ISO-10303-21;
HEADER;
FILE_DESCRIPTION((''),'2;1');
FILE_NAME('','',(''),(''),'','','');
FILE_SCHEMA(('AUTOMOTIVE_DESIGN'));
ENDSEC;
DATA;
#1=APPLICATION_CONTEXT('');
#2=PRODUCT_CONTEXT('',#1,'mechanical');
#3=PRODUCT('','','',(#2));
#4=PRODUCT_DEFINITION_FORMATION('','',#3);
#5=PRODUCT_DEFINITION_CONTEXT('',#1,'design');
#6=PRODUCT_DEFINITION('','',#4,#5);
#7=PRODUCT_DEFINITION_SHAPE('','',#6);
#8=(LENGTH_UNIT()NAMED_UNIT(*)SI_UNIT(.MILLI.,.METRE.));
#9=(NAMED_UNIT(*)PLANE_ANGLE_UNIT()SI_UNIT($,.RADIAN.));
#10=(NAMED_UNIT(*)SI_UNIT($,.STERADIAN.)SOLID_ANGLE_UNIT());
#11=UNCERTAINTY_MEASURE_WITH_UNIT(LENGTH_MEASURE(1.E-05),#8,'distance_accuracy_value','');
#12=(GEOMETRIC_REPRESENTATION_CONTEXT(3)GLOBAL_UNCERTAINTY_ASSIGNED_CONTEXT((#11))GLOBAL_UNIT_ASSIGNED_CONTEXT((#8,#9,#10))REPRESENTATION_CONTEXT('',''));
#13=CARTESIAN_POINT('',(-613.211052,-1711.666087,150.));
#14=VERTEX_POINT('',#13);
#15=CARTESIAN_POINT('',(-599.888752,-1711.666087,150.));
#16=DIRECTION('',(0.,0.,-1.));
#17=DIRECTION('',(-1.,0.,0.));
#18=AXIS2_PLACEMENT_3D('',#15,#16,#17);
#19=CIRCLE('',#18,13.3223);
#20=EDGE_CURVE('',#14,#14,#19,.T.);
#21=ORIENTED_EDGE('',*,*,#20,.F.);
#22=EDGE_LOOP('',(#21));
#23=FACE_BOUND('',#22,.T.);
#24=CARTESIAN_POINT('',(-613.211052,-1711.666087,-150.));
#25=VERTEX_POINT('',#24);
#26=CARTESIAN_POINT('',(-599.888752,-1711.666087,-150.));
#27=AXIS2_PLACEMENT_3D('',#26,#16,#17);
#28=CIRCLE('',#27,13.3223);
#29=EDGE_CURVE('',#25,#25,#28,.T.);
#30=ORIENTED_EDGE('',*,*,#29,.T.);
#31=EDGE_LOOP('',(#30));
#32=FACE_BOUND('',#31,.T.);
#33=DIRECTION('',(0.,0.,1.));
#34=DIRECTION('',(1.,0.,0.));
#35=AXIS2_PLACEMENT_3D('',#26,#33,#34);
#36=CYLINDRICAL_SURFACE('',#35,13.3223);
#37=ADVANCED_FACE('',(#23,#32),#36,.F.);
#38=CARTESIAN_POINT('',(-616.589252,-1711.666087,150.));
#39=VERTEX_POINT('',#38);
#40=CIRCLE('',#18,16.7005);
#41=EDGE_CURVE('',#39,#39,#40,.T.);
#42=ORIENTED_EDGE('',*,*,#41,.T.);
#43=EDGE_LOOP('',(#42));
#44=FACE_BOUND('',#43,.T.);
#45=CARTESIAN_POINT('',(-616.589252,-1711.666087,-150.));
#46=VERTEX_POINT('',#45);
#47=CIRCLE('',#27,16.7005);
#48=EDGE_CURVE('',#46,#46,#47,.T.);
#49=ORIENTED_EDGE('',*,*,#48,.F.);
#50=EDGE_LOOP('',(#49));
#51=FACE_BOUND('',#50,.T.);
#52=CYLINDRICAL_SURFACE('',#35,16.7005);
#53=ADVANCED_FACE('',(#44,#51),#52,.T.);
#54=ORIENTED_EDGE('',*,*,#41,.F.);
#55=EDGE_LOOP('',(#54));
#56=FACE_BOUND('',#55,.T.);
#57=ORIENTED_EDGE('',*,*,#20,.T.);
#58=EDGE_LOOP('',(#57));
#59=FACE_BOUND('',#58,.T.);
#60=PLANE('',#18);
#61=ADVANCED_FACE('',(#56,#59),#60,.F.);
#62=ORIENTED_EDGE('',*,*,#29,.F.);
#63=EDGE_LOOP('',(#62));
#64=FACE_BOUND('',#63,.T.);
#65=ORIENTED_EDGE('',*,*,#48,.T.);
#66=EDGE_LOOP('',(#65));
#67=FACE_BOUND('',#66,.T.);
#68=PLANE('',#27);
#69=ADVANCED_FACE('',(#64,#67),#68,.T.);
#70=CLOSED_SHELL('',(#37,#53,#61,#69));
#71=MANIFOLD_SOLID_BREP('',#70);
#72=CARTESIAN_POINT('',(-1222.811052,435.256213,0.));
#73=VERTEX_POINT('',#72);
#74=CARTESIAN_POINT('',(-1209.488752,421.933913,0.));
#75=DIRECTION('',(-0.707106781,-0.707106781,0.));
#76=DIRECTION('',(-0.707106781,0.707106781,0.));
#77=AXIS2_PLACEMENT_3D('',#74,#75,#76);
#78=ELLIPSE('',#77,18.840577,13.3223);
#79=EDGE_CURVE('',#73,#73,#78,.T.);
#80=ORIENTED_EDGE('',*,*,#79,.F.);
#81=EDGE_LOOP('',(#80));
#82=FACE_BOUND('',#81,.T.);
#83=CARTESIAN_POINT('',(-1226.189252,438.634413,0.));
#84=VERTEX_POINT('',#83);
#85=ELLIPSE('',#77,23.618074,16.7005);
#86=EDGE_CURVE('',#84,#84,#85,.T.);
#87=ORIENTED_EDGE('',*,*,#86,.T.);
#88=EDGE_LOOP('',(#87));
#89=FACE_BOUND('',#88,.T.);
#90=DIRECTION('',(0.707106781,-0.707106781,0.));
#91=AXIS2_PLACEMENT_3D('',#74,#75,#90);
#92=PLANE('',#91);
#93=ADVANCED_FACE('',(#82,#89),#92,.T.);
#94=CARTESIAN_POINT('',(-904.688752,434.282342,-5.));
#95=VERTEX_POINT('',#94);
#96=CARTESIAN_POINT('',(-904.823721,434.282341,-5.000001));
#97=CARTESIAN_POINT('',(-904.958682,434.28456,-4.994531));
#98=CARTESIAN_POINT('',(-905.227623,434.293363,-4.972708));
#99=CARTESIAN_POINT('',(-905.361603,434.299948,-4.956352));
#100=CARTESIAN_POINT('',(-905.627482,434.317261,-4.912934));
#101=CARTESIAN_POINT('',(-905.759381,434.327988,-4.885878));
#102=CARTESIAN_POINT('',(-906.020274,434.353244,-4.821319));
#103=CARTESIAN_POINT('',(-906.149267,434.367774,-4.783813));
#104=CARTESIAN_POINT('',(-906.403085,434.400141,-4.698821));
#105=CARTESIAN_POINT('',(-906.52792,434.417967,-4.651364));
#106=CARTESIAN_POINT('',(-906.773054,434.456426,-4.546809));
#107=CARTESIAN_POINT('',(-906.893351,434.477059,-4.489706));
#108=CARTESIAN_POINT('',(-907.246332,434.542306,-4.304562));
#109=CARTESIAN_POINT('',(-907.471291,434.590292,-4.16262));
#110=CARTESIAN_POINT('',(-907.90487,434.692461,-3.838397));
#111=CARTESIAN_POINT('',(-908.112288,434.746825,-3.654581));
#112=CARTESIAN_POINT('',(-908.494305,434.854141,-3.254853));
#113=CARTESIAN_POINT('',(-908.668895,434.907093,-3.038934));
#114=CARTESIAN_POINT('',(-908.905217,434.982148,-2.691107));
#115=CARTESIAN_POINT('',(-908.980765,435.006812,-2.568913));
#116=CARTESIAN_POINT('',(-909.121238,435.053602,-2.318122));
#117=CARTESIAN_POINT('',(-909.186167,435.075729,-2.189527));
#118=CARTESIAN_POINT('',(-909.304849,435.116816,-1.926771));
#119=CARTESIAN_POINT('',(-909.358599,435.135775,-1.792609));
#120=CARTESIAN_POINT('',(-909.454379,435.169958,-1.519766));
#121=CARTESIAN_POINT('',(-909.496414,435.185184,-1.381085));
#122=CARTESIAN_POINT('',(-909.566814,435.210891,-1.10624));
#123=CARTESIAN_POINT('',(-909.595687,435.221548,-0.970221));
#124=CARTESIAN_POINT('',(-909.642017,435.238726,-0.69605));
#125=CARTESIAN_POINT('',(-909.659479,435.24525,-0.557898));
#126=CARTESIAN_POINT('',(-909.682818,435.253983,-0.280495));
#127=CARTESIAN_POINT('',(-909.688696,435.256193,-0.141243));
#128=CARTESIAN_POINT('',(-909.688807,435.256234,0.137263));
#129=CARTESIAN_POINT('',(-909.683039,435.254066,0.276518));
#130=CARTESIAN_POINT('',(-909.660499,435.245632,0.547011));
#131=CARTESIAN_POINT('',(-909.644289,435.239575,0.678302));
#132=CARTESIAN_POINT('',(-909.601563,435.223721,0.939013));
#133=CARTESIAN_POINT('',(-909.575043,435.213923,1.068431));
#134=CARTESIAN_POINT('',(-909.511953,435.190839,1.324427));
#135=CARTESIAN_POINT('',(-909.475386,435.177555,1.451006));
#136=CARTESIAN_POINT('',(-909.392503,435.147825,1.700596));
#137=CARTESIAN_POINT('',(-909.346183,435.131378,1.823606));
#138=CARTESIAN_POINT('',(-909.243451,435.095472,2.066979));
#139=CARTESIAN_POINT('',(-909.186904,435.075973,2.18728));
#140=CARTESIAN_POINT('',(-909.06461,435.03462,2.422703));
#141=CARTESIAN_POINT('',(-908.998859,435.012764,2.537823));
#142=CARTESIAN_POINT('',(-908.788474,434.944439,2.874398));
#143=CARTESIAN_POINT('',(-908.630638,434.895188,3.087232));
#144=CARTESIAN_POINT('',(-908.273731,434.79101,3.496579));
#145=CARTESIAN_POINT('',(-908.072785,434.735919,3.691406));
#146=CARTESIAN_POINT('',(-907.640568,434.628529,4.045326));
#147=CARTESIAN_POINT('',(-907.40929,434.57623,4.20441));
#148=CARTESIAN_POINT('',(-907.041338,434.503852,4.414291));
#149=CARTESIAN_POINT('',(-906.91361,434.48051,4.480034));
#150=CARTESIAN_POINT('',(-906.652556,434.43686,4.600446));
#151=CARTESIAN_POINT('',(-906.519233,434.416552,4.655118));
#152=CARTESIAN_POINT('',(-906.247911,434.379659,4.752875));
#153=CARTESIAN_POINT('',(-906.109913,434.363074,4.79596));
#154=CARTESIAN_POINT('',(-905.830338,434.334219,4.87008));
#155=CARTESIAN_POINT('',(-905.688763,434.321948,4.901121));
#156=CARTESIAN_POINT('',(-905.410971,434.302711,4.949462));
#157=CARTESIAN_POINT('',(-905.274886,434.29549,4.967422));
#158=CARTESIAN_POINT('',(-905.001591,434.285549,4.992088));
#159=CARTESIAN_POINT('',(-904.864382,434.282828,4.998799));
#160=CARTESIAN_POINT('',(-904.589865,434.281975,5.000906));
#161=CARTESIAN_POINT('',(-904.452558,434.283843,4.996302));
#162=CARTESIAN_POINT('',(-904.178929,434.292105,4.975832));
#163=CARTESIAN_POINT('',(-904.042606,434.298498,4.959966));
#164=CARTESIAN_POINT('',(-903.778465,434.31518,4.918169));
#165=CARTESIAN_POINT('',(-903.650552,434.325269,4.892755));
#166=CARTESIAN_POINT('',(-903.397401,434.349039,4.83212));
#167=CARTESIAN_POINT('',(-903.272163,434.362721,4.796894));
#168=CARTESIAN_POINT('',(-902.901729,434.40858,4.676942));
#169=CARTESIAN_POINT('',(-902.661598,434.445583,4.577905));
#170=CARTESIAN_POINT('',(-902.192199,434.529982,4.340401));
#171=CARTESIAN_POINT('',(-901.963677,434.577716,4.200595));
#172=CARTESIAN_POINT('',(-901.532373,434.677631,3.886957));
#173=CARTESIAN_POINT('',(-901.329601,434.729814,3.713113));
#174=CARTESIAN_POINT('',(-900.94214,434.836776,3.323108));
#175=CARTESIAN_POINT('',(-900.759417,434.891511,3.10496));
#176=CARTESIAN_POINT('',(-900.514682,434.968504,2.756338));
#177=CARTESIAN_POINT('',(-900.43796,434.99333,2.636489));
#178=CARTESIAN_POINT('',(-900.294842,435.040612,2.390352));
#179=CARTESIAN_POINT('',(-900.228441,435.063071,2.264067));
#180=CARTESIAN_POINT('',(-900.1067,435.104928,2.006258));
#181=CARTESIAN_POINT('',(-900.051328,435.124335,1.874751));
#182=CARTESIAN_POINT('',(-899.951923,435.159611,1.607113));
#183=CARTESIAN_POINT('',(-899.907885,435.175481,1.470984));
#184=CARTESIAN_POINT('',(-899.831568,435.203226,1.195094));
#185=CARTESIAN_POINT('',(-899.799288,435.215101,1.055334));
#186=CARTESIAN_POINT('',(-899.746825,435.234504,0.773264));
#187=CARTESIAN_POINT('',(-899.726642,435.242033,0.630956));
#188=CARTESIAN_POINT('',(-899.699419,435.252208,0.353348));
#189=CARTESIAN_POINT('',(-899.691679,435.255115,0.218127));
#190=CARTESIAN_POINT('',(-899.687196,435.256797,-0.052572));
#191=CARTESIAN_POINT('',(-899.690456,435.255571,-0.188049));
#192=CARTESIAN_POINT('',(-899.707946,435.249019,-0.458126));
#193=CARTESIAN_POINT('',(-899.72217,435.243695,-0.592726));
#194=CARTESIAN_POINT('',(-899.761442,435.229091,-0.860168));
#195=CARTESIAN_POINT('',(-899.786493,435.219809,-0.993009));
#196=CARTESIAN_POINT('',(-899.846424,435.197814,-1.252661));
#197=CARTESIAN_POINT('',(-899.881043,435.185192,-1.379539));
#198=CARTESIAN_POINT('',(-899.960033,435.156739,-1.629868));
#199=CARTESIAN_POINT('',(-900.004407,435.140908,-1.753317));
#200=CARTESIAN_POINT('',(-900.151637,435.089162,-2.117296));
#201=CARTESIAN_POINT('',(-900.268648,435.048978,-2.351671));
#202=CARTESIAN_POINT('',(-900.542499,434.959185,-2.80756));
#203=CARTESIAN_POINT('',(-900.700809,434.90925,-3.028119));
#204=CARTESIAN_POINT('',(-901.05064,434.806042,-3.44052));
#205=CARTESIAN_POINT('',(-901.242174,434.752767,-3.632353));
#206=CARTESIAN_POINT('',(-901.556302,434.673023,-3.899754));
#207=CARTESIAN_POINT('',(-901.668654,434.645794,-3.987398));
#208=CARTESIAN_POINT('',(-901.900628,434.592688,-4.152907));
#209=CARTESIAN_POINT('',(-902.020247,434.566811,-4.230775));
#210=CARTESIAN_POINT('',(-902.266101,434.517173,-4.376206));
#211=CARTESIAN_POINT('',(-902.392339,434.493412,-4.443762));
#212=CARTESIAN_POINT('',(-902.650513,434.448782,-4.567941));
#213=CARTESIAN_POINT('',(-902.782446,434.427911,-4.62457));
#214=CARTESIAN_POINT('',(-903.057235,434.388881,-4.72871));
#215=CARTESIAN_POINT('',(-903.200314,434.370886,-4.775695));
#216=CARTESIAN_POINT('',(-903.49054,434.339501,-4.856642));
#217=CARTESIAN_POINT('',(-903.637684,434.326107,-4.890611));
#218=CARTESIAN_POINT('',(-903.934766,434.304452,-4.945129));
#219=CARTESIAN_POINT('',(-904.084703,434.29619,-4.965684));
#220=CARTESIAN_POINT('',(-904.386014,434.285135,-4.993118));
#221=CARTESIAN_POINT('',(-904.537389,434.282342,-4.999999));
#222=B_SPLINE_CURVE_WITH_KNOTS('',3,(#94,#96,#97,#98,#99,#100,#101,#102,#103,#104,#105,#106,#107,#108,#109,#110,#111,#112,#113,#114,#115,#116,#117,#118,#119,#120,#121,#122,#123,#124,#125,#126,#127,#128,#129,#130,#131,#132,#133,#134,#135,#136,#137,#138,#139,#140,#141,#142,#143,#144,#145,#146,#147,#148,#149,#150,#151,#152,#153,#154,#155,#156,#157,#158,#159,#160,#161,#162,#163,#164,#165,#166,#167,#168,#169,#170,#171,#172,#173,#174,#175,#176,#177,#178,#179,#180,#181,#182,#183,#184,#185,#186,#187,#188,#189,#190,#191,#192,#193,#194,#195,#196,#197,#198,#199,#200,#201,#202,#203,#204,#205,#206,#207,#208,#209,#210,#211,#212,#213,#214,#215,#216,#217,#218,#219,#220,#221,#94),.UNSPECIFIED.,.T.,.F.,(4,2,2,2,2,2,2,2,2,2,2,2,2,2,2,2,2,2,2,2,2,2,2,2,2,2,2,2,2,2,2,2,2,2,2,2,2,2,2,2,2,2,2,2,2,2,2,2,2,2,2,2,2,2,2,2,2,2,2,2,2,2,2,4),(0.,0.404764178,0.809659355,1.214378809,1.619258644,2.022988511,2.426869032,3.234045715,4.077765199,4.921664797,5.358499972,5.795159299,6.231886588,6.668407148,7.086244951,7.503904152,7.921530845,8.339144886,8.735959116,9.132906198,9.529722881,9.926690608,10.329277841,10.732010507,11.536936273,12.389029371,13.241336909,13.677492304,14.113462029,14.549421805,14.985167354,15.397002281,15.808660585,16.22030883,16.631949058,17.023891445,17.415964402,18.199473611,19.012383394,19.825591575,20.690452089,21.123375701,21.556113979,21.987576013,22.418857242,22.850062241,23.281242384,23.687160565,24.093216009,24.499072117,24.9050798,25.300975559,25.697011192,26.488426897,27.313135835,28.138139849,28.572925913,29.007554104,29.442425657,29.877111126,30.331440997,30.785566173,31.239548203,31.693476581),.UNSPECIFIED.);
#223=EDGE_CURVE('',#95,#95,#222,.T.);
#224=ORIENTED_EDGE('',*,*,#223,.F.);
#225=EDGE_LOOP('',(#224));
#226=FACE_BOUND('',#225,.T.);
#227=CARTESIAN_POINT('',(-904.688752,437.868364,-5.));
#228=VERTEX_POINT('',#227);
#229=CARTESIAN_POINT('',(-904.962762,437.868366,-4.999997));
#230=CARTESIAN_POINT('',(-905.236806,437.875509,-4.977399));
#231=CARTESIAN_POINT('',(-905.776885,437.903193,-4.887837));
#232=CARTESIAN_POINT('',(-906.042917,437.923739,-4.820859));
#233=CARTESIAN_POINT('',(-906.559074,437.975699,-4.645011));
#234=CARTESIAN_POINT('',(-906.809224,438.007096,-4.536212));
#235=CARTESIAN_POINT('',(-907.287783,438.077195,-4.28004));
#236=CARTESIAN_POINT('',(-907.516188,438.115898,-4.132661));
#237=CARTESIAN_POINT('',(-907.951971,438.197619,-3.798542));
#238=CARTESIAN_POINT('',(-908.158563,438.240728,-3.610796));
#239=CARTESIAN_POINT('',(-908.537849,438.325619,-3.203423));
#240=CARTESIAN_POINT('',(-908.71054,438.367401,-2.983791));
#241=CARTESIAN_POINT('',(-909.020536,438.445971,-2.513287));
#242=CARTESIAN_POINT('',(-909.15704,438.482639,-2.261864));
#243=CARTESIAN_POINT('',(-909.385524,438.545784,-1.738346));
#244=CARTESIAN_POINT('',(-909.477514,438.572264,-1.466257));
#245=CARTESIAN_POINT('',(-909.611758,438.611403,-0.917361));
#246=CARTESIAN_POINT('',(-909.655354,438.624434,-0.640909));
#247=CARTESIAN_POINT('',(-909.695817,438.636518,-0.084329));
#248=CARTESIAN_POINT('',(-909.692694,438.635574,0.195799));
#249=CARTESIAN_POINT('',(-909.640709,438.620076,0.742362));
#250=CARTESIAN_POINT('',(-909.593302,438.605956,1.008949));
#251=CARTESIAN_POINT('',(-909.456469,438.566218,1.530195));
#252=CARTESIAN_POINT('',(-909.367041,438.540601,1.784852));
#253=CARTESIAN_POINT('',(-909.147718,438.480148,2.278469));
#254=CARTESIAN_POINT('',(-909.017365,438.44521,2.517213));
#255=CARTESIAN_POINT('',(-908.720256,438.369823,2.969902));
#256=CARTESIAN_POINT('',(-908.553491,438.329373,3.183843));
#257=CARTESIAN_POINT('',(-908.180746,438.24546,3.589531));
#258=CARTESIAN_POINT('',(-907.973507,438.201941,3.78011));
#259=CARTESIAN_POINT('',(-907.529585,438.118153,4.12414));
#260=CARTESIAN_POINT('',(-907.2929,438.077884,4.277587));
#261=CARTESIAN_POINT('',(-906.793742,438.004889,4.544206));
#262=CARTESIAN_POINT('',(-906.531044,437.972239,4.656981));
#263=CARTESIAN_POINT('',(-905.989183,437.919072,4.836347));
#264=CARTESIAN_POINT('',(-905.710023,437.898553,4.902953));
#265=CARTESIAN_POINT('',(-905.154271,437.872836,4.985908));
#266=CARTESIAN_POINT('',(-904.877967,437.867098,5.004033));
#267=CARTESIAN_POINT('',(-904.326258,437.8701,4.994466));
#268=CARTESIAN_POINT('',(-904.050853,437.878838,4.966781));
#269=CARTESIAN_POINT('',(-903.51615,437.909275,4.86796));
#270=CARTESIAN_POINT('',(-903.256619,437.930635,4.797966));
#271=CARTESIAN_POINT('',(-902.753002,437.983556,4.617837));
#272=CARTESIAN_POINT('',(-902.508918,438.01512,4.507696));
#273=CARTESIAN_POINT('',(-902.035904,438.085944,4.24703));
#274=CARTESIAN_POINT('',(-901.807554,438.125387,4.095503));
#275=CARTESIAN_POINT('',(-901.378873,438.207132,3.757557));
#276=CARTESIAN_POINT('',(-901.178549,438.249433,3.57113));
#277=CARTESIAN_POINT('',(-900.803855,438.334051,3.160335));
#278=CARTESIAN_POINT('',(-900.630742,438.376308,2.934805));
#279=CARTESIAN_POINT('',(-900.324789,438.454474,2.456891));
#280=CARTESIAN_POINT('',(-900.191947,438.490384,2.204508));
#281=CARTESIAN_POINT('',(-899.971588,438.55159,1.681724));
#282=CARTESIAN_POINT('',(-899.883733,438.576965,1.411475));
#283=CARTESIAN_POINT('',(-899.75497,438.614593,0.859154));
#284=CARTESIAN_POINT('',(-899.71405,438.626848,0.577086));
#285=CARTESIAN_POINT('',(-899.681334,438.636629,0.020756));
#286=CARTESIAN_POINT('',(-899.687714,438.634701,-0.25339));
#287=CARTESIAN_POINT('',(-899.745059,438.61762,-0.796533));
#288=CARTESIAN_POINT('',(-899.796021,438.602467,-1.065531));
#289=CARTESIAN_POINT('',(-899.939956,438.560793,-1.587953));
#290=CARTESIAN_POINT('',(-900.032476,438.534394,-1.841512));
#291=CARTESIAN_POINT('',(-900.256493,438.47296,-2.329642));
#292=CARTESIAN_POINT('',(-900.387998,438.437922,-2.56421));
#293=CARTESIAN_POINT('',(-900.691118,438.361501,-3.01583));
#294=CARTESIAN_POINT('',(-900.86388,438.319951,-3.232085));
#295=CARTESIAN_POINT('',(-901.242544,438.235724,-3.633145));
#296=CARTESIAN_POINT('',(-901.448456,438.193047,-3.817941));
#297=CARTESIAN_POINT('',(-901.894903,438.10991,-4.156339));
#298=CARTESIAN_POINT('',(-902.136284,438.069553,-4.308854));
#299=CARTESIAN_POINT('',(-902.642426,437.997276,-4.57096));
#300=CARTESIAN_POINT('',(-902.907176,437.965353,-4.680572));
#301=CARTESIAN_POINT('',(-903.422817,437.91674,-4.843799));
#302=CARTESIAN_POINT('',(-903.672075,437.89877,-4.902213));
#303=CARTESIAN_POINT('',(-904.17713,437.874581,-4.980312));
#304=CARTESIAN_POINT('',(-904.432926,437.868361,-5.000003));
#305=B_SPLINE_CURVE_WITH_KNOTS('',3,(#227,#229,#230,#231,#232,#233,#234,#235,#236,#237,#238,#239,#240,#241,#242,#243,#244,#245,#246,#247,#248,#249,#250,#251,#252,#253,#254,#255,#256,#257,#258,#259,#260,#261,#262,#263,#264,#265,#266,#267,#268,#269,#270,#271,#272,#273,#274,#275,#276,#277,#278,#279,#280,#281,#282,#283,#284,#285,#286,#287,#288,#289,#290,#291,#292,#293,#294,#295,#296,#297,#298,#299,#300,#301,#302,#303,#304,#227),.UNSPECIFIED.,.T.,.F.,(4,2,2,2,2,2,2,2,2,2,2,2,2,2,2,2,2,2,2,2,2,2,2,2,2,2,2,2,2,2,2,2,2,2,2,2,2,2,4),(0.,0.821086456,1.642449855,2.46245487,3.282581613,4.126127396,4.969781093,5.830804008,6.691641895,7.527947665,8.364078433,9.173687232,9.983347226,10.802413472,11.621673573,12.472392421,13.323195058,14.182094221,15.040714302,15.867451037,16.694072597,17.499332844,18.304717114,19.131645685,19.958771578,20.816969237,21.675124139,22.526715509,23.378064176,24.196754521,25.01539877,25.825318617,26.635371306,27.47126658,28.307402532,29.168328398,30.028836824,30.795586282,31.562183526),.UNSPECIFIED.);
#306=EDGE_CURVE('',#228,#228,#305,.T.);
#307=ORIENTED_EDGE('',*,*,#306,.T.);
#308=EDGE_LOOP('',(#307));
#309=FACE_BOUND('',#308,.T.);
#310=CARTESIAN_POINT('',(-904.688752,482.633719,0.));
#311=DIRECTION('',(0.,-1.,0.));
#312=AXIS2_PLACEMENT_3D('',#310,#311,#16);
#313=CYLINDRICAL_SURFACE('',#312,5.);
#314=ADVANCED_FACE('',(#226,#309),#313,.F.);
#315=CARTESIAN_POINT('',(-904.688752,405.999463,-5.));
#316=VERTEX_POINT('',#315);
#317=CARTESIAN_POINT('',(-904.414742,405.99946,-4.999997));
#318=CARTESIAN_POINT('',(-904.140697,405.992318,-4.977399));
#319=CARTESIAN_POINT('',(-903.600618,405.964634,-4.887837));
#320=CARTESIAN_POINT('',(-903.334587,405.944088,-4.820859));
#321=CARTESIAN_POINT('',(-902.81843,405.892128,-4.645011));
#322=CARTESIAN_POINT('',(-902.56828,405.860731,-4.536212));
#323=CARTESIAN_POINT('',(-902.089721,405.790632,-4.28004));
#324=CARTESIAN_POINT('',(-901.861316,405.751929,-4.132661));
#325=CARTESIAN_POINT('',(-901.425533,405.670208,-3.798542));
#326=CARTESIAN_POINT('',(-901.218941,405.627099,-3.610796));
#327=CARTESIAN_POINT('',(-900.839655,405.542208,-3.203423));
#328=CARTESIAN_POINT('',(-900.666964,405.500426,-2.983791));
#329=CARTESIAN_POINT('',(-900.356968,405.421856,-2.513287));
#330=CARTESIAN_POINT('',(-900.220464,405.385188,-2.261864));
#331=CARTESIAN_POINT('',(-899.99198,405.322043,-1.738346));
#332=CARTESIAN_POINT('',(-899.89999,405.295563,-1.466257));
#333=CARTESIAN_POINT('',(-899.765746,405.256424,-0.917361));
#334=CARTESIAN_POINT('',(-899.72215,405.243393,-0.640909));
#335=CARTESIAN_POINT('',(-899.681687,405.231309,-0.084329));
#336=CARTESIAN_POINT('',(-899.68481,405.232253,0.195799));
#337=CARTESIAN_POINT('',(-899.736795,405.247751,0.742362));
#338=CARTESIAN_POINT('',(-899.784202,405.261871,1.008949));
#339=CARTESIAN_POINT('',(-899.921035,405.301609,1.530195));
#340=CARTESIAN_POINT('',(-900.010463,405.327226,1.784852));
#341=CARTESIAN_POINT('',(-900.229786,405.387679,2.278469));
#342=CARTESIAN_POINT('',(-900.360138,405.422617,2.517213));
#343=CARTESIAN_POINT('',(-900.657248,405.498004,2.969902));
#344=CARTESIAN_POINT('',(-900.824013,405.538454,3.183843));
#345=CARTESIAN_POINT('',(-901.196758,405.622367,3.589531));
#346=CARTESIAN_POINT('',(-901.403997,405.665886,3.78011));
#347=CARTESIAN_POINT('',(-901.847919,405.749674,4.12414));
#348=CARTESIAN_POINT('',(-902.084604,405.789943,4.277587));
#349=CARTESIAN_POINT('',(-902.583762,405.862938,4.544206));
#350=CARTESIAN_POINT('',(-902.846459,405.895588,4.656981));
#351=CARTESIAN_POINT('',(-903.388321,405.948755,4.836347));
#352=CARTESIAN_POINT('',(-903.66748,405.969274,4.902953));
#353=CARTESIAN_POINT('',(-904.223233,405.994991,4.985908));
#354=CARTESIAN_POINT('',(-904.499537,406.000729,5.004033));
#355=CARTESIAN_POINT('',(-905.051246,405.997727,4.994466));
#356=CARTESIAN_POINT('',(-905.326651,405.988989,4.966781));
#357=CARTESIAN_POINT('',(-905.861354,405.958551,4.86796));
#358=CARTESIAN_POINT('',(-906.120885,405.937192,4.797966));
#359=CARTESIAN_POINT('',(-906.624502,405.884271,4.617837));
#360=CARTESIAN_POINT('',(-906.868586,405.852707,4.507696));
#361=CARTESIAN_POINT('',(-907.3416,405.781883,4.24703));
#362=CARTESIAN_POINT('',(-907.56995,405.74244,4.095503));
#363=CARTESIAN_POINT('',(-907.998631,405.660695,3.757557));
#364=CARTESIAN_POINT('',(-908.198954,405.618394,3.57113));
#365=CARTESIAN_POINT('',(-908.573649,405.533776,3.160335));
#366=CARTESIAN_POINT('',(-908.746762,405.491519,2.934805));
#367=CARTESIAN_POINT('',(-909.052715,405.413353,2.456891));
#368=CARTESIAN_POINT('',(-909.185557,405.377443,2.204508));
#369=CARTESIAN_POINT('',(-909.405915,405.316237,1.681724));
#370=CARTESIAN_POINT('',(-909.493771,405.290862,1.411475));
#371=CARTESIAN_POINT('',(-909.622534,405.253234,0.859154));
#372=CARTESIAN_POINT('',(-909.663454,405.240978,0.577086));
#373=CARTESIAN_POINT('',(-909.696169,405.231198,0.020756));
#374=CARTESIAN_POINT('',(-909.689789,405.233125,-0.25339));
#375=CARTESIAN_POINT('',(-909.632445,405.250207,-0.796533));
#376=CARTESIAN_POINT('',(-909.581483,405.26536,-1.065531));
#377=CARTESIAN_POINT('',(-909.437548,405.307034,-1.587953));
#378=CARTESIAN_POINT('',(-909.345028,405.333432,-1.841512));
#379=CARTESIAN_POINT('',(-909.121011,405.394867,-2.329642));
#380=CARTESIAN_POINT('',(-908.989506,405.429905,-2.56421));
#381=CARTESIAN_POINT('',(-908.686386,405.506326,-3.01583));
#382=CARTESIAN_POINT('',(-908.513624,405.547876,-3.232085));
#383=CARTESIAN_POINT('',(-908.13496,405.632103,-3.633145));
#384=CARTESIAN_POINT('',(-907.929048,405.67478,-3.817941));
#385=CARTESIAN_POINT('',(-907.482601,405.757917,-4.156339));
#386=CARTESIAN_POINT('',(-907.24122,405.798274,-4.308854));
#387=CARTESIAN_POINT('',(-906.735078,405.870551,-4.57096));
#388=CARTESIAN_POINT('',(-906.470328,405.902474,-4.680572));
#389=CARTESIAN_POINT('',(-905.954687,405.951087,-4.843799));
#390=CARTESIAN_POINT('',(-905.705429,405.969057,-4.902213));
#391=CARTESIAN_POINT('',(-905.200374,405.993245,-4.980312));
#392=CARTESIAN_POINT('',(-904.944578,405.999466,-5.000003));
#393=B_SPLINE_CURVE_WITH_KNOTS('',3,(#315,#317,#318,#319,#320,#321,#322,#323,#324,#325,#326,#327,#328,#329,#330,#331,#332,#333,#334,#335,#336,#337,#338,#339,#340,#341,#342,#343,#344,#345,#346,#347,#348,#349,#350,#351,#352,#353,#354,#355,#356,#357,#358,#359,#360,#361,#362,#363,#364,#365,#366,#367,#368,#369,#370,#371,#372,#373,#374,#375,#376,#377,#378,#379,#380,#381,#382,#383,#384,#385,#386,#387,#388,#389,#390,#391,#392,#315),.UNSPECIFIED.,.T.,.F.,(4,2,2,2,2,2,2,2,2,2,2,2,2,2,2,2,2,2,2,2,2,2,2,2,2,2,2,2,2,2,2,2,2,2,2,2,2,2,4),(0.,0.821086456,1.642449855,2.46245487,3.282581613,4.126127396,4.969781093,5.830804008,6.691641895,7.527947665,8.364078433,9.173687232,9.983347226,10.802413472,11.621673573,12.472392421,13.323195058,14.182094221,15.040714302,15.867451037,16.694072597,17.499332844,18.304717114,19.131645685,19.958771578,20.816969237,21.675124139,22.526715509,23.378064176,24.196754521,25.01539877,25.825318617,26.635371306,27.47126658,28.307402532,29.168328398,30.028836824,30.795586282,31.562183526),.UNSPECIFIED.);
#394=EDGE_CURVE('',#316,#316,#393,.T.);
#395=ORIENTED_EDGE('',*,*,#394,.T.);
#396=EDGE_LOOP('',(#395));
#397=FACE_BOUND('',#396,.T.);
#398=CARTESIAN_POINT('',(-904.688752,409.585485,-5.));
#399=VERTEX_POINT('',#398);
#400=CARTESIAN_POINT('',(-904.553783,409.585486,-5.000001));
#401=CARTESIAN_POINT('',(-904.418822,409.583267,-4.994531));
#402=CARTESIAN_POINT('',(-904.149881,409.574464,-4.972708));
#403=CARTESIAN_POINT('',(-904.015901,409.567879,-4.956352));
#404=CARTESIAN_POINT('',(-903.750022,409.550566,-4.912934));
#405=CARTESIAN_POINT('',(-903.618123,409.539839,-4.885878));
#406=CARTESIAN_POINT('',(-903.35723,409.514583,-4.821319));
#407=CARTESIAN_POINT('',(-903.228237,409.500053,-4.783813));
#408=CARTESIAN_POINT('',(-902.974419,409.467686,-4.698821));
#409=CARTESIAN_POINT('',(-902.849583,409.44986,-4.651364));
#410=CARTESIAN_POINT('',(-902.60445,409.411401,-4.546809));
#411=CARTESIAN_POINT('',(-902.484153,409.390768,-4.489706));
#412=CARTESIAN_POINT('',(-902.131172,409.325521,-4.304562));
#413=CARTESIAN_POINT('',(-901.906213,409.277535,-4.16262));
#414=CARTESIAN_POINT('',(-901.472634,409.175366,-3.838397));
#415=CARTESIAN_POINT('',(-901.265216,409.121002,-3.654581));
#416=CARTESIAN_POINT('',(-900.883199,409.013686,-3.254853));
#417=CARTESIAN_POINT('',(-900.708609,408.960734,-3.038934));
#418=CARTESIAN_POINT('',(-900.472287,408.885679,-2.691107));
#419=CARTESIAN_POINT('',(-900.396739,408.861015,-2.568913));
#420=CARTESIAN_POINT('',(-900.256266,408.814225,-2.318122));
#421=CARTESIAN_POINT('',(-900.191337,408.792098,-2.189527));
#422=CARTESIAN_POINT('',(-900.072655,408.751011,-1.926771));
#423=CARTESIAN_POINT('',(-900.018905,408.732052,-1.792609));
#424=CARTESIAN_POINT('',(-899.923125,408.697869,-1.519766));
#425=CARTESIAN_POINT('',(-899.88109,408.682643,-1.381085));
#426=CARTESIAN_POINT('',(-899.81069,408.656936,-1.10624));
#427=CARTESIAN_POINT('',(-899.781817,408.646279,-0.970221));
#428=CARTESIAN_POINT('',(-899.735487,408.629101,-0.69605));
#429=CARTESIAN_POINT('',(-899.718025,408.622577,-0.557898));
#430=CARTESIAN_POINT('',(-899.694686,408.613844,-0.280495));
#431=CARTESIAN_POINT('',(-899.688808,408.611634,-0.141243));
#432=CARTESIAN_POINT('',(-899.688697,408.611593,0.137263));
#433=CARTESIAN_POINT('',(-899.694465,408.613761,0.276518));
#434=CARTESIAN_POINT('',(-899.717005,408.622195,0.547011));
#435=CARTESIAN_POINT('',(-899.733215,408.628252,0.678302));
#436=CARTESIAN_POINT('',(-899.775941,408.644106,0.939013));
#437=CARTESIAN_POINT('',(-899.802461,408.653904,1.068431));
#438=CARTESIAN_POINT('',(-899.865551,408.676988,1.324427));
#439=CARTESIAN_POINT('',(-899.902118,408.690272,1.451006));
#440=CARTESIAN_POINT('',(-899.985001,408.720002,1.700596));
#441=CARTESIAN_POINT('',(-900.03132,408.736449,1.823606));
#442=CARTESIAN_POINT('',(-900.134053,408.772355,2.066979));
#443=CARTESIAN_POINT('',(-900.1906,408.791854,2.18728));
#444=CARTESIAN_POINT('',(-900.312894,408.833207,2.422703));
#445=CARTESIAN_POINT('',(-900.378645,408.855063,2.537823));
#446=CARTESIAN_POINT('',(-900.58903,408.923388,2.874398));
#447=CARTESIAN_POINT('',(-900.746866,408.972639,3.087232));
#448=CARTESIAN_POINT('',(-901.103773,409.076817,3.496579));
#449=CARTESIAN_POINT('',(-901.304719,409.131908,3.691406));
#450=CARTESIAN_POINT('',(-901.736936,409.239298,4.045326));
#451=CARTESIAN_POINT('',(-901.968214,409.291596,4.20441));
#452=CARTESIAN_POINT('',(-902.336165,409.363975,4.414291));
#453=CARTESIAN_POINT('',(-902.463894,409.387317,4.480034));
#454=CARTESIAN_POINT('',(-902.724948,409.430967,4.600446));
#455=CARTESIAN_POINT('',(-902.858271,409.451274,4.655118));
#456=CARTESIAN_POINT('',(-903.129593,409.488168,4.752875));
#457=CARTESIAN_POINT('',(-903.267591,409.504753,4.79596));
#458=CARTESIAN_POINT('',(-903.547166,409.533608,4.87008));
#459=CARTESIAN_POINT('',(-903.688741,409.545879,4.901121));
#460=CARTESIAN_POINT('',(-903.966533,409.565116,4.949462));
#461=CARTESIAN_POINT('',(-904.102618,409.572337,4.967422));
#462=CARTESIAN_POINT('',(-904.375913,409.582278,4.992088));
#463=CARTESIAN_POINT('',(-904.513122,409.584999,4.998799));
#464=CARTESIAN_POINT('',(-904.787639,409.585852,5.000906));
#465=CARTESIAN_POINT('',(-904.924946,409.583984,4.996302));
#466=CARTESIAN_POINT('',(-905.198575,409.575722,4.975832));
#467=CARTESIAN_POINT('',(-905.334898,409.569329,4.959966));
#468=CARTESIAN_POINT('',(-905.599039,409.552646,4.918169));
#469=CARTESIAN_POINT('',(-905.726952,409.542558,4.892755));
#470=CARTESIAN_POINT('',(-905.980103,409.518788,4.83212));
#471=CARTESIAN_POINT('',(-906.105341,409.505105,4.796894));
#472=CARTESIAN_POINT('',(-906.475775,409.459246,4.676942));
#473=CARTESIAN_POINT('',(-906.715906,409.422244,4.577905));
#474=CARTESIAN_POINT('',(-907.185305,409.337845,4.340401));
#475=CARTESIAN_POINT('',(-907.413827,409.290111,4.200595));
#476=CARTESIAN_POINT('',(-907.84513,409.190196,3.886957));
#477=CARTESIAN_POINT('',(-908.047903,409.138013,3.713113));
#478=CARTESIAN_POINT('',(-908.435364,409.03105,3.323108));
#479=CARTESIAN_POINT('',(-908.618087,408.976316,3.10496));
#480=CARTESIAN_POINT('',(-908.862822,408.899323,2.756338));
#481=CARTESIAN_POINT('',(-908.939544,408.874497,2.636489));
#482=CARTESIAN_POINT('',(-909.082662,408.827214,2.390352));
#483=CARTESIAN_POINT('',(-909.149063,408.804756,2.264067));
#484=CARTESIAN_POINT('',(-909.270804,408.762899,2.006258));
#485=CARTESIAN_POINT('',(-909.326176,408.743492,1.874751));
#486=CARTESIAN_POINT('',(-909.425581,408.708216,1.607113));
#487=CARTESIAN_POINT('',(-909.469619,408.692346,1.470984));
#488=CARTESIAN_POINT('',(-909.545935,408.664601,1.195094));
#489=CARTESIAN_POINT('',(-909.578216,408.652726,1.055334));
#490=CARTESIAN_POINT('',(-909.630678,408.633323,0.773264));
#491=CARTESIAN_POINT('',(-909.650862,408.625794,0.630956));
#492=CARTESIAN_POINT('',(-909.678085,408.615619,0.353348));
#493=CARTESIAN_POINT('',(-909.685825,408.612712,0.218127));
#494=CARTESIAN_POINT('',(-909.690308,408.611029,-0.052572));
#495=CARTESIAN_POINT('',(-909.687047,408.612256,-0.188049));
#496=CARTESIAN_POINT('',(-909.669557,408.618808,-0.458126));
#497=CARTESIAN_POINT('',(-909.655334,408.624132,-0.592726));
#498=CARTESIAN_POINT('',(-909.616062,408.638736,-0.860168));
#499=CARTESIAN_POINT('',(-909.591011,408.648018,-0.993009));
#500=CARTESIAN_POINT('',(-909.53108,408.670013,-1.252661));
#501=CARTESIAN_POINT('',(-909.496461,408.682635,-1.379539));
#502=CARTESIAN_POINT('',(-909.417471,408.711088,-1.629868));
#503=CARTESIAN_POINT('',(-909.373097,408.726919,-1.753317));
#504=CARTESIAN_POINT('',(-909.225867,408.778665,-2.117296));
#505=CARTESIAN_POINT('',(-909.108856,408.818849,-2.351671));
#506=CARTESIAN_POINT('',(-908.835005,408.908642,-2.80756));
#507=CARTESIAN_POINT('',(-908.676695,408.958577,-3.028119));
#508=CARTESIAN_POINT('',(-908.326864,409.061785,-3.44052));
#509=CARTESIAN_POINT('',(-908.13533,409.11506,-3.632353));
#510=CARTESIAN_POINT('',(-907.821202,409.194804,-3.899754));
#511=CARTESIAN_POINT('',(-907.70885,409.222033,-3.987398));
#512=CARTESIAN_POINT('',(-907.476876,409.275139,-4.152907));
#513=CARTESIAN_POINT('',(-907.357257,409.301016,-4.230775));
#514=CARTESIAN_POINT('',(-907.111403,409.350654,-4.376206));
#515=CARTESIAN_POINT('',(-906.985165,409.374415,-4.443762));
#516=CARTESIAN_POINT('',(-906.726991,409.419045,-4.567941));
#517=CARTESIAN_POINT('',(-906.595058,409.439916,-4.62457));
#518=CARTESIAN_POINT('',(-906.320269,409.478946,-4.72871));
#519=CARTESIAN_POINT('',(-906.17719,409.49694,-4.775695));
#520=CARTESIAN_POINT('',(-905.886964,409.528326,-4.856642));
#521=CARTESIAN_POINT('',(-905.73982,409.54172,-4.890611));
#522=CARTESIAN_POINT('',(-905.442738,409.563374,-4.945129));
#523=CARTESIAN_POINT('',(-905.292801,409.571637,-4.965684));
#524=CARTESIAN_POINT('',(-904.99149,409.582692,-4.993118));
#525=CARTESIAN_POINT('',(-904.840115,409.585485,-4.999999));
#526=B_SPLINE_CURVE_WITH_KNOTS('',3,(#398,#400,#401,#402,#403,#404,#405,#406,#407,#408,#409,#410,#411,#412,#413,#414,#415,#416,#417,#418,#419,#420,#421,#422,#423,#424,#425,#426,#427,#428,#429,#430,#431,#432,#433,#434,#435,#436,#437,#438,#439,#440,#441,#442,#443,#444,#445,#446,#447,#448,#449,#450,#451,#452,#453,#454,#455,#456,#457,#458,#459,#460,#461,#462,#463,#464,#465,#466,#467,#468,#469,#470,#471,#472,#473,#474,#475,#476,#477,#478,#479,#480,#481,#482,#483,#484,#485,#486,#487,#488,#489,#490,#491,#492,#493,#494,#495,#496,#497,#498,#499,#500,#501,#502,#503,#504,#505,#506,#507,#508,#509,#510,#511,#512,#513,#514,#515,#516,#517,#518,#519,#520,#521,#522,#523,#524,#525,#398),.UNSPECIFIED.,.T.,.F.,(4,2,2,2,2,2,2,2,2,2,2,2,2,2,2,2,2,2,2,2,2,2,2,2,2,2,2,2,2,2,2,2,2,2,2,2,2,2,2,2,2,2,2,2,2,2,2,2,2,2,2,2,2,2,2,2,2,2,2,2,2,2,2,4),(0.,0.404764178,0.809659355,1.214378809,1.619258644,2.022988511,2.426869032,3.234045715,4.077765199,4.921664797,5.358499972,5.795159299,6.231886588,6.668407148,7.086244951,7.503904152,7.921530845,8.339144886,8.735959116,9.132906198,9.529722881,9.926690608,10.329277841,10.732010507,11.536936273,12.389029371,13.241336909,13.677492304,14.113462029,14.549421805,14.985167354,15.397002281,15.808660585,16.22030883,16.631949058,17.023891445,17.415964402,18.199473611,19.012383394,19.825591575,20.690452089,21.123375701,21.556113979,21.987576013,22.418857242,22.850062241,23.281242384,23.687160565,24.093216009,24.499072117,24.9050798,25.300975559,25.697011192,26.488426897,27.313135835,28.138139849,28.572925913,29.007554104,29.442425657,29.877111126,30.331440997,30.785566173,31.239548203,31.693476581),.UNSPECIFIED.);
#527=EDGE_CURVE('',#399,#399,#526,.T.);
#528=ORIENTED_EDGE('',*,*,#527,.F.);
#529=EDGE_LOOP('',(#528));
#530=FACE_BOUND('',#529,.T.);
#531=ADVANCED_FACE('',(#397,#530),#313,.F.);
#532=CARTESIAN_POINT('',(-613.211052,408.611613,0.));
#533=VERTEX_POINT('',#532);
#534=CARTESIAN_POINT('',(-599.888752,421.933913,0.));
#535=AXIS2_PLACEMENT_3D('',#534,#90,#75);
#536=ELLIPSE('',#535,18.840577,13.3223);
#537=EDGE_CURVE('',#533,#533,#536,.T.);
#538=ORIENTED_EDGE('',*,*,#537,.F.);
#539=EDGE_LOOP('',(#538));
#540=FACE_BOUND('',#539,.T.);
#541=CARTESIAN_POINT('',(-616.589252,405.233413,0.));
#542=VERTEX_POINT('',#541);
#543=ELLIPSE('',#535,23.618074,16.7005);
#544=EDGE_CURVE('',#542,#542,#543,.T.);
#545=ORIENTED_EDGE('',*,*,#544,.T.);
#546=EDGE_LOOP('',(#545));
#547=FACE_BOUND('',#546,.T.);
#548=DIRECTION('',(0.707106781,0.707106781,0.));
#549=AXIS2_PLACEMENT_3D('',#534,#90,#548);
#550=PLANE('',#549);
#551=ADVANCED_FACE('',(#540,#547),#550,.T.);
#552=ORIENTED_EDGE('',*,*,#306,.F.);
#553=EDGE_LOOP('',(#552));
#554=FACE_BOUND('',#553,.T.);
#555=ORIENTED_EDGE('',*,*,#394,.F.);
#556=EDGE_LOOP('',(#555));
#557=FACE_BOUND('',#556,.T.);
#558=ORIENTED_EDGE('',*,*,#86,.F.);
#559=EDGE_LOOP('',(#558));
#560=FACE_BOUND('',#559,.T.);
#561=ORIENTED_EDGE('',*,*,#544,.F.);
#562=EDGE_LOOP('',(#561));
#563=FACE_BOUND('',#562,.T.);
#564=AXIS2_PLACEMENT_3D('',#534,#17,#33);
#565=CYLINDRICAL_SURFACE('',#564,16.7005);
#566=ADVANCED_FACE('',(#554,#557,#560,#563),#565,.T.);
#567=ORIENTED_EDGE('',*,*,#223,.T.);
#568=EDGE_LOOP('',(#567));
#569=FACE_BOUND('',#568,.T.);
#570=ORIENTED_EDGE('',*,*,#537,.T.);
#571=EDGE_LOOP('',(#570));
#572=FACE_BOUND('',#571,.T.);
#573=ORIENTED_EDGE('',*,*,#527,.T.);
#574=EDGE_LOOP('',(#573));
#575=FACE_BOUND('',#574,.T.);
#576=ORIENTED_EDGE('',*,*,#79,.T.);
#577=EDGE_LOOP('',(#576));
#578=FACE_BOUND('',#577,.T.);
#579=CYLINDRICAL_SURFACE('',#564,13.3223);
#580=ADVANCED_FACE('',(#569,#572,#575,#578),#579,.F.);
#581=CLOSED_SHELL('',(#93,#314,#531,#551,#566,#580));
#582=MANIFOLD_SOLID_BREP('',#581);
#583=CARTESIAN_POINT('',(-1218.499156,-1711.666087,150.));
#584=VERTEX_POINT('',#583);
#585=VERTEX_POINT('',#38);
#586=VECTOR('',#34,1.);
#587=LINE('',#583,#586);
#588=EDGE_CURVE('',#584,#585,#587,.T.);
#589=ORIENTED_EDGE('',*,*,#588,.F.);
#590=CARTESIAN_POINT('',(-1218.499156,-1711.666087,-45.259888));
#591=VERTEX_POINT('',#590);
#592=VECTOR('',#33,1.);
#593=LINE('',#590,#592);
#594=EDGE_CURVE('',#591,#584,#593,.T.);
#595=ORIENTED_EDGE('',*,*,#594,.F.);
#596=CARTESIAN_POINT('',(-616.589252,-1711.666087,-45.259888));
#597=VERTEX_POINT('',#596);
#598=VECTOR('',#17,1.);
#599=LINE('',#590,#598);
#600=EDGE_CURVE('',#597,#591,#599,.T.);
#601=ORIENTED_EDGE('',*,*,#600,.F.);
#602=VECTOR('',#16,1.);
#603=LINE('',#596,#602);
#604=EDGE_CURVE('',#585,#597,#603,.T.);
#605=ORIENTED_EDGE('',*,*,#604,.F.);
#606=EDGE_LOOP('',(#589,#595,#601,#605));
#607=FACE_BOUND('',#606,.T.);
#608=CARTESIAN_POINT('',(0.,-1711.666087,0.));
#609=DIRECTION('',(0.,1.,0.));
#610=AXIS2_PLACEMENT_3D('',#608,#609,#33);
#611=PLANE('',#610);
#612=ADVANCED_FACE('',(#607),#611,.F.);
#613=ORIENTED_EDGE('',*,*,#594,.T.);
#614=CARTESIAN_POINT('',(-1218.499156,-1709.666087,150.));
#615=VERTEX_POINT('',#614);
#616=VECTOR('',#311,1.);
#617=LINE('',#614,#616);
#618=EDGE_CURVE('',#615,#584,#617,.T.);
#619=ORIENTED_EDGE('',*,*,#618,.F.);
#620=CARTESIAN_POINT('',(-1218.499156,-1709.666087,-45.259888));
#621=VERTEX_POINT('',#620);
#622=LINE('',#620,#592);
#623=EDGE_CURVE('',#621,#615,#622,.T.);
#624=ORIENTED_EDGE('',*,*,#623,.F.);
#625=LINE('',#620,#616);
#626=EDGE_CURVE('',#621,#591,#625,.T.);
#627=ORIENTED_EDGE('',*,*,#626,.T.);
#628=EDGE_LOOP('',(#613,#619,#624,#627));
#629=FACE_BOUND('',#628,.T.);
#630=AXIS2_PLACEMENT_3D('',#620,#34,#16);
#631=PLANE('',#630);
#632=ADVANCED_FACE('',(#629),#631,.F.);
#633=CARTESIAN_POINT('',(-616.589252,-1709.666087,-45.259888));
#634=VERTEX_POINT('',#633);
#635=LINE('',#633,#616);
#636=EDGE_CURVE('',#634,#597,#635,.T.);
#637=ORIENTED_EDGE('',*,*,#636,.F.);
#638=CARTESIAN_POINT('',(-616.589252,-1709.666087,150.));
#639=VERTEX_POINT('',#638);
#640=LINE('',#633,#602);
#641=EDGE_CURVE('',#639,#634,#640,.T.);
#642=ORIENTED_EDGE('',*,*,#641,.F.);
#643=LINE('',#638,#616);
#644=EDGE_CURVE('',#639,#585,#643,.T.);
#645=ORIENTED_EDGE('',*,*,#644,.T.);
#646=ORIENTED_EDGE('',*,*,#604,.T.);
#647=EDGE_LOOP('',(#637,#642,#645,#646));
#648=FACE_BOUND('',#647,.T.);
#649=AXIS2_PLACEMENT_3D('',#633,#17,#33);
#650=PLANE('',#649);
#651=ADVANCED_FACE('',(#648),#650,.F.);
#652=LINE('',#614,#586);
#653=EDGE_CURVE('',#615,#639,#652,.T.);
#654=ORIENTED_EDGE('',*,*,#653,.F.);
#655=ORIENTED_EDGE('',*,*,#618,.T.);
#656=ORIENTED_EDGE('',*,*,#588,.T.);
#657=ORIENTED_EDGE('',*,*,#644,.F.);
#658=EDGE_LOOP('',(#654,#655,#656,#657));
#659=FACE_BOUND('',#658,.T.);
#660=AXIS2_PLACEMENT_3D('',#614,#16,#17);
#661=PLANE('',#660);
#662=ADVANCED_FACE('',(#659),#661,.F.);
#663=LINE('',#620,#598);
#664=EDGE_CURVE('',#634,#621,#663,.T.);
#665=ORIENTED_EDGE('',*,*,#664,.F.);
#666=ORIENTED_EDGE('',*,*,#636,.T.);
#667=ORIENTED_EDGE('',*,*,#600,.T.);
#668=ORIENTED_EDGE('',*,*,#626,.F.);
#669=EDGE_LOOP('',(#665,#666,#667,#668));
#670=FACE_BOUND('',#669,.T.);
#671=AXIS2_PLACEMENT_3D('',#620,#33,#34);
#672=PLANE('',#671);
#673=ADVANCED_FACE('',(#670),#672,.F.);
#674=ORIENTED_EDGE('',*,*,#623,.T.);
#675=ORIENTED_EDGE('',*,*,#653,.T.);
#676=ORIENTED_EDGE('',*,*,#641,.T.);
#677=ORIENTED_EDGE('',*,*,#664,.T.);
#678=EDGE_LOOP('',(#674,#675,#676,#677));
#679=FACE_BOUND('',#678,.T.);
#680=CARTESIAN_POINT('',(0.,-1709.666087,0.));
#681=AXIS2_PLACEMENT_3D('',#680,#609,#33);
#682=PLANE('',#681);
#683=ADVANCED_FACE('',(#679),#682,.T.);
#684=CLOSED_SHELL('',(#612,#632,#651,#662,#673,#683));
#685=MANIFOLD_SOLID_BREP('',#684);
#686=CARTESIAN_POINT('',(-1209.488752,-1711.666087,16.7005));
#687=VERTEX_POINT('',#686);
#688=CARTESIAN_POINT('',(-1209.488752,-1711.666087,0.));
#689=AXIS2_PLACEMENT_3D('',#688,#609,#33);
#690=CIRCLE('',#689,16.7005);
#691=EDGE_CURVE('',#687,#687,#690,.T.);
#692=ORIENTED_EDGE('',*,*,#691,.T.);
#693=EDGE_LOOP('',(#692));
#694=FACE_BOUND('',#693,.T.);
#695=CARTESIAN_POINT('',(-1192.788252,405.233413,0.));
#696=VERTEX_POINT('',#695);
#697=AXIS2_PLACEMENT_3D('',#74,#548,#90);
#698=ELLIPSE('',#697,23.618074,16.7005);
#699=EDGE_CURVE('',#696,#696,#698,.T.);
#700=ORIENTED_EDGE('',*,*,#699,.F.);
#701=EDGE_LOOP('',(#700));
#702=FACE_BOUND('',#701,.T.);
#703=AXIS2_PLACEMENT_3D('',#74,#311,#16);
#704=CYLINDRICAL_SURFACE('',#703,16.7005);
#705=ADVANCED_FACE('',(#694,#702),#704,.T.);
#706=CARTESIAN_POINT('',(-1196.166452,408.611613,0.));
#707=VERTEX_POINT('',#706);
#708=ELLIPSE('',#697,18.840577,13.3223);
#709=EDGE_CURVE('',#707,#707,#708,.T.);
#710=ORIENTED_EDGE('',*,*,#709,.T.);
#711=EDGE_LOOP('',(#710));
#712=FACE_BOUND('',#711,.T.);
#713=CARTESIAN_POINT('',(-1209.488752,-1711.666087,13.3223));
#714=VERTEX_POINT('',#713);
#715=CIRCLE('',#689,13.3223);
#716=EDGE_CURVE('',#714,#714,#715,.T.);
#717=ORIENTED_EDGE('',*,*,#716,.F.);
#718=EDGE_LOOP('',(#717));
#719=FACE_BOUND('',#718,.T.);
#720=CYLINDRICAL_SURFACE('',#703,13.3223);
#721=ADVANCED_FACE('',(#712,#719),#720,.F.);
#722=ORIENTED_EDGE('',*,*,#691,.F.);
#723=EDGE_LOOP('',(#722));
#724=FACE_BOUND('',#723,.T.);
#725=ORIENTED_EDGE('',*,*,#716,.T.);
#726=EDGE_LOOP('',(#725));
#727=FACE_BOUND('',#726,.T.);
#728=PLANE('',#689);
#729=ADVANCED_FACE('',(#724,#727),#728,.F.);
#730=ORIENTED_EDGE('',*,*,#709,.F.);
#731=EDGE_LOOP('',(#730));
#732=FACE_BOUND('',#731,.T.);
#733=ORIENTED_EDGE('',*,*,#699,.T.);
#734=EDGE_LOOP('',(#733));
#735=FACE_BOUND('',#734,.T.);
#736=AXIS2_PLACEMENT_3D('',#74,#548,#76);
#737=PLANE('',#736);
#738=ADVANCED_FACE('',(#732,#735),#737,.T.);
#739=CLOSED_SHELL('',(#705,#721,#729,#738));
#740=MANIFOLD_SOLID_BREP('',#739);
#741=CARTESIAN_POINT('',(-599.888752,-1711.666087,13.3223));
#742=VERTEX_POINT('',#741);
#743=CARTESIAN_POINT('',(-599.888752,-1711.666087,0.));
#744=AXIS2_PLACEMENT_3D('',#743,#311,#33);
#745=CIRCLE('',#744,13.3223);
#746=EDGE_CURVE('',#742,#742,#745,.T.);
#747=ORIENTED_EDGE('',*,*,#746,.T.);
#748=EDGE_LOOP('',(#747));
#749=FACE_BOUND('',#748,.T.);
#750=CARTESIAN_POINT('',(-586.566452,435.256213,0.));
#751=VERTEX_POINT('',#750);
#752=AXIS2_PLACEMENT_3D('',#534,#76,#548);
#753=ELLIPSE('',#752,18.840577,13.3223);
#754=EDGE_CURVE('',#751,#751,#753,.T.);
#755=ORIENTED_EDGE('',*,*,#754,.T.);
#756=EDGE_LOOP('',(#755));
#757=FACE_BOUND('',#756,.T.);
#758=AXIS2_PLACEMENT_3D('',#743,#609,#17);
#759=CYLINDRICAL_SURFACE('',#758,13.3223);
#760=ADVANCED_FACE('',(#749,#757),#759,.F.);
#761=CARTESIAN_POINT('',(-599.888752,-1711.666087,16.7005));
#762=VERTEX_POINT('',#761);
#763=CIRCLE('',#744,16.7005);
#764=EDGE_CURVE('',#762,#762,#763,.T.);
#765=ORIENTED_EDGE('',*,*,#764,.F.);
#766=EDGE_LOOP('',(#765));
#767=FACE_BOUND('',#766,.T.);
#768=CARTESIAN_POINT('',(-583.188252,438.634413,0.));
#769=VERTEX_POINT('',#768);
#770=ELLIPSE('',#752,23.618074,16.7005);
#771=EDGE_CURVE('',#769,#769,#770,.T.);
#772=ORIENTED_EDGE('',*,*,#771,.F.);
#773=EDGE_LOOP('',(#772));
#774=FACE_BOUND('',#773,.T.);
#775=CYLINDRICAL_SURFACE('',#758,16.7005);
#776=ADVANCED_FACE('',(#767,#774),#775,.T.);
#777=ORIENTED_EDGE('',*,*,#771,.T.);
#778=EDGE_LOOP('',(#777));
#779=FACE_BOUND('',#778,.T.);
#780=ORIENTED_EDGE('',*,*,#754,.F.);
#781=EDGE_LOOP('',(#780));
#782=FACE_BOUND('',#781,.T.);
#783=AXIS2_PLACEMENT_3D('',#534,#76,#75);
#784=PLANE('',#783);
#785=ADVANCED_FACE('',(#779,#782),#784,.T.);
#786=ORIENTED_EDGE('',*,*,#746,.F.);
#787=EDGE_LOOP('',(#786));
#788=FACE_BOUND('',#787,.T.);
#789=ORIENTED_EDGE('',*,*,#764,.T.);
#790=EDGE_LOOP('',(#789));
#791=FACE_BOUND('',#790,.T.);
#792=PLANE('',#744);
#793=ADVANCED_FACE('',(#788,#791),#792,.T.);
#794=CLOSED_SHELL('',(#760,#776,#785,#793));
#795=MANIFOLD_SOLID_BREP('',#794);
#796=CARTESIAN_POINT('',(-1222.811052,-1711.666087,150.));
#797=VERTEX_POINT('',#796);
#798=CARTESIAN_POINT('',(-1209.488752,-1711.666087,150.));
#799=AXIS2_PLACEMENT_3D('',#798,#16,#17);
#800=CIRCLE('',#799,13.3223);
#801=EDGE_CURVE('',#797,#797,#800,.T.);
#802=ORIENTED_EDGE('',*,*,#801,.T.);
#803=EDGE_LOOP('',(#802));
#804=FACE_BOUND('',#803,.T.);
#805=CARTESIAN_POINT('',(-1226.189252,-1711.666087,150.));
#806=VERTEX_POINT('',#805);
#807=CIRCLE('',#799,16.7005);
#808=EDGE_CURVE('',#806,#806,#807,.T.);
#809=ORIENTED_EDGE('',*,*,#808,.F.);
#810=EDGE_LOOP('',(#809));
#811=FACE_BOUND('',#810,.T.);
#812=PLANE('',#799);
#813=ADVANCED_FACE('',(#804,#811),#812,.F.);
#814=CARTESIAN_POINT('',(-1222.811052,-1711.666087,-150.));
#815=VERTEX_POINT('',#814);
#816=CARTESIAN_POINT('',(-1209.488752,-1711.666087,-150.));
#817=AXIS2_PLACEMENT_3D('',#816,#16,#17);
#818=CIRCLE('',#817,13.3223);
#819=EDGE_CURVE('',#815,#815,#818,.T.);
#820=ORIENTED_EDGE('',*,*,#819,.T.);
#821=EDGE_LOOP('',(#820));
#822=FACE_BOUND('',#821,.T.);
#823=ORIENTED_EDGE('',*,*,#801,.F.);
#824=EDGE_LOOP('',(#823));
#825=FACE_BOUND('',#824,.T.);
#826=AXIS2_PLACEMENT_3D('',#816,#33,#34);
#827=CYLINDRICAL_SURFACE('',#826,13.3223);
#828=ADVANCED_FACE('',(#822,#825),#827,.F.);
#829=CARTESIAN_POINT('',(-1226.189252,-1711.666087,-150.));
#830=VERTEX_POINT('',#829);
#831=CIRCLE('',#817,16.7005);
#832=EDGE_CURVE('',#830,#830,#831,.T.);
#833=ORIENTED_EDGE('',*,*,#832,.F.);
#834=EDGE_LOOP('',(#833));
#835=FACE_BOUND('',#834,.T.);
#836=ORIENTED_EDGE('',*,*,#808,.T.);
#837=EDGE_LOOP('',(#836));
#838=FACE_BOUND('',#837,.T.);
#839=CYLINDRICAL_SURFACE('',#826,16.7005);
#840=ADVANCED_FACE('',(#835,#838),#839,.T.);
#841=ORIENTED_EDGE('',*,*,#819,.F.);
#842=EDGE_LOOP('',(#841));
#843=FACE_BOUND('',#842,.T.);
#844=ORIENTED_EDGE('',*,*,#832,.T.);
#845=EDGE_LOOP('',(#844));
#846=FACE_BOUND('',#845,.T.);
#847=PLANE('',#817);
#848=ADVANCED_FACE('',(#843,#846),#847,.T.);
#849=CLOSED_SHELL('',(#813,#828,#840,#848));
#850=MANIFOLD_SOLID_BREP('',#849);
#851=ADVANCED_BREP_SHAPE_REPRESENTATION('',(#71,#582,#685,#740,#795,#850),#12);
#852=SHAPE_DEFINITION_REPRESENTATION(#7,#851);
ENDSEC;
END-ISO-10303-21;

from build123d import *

# Parameters (mm, degrees)
SKETCH11_R                           = 16.7005
SKETCH11_R_2                         = 13.3223
PIPE_CONFIGURED_1_0_SCH_40_1_DEPTH   = 2158.218073598
SKETCH11_ON_SEGMENT_2_R              = 16.7005
SKETCH11_ON_SEGMENT_2_R_2            = 13.3223
PIPE_CONFIGURED_1_0_SCH_40_1_2_DEPTH = 658.836147197
SKETCH11_ON_SEGMENT_3_R              = 16.7005
SKETCH11_ON_SEGMENT_3_R_2            = 13.3223
PIPE_CONFIGURED_1_0_SCH_40_1_3_DEPTH = 2158.218073598
SKETCH12_R                           = 16.7005
SKETCH12_R_2                         = 13.3223
PIPE_CONFIGURED_1_0_SCH_40_2_DEPTH   = 300
SKETCH12_ON_SEGMENT_2_R              = 16.7005
SKETCH12_ON_SEGMENT_2_R_2            = 13.3223
PIPE_CONFIGURED_1_0_SCH_40_2_2_DEPTH = 300
CUT_EXTRUDE2_START                   = -34
CUT_EXTRUDE2_OUTLINE_R               = 5
CUT_EXTRUDE2_DEPTH                   = 35
SKETCH15_W                           = 601.909903741
SKETCH15_H                           = 195.259888428
BOSS_EXTRUDE1_DEPTH                  = 2


with BuildPart() as part:
    # Sketch11 → Pipe - configured 1.0 SCH 40(1) (new body)
    with BuildSketch(Plane(origin=(-1209.488751956, -1711.666086539, 0), x_dir=(-1, 0, 0), z_dir=(0, 1, 0))):
        Circle(SKETCH11_R)
        Circle(SKETCH11_R_2, mode=Mode.SUBTRACT)
    extrude(amount=PIPE_CONFIGURED_1_0_SCH_40_1_DEPTH)

    # Pipe - configured 1.0 SCH 40(1) mitre 1
    split(bisect_by=Plane(origin=(-1209.488751956, 421.933913461, 0), x_dir=(0.707106781, -0.707106781, 0), z_dir=(-0.707106781, -0.707106781, 0)), keep=Keep.TOP)


with BuildPart() as body_2:
    # Sketch11 on segment 2 (carried to segment 2) → Pipe - configured 1.0 SCH 40_1 2 (new body)
    with BuildSketch(Plane(origin=(-1234.106825554, 421.933913461, 0), x_dir=(0, 1, 0), z_dir=(1, 0, 0))):
        Circle(SKETCH11_ON_SEGMENT_2_R)
        Circle(SKETCH11_ON_SEGMENT_2_R_2, mode=Mode.SUBTRACT)
    extrude(amount=PIPE_CONFIGURED_1_0_SCH_40_1_2_DEPTH)

    # Pipe - configured 1.0 SCH 40_1 2 mitre 1
    split(bisect_by=Plane(origin=(-1209.488751956, 421.933913461, 0), x_dir=(-0.707106781, 0.707106781, 0), z_dir=(0.707106781, 0.707106781, 0)), keep=Keep.TOP)

    # Pipe - configured 1.0 SCH 40_1 2 mitre 2
    split(bisect_by=Plane(origin=(-599.888751956, 421.933913461, 0), x_dir=(-0.707106781, -0.707106781, 0), z_dir=(-0.707106781, 0.707106781, 0)), keep=Keep.TOP)

    # Cut-Extrude2: read off the stored shape, not the designer's step
    # Cut-Extrude2 outline → Cut-Extrude2 (cut)
    with BuildSketch(Plane(origin=(0, 438.633719211, 0), x_dir=(1, 0, 0), z_dir=(0, 1, 0)).offset(CUT_EXTRUDE2_START)):
        with Locations((-904.688751956, 0)):
            Circle(CUT_EXTRUDE2_OUTLINE_R)
    extrude(amount=CUT_EXTRUDE2_DEPTH, mode=Mode.SUBTRACT)


with BuildPart() as body_3:
    # Sketch11 on segment 3 (carried to segment 3) → Pipe - configured 1.0 SCH 40_1 3 (new body)
    with BuildSketch(Plane(origin=(-599.888751956, 446.551987059, 0), x_dir=(1, 0, 0), z_dir=(0, -1, 0))):
        Circle(SKETCH11_ON_SEGMENT_3_R)
        Circle(SKETCH11_ON_SEGMENT_3_R_2, mode=Mode.SUBTRACT)
    extrude(amount=PIPE_CONFIGURED_1_0_SCH_40_1_3_DEPTH)

    # Pipe - configured 1.0 SCH 40_1 3 mitre 1
    split(bisect_by=Plane(origin=(-599.888751956, 421.933913461, 0), x_dir=(0.707106781, 0.707106781, 0), z_dir=(0.707106781, -0.707106781, 0)), keep=Keep.TOP)


with BuildPart() as body_4:
    # Sketch12 → Pipe - configured 1.0 SCH 40(2) (new body)
    with BuildSketch(Plane(origin=(-599.888751956, -1711.666086539, 150), x_dir=(1, 0, 0), z_dir=(0, 0, -1))):
        Circle(SKETCH12_R)
        Circle(SKETCH12_R_2, mode=Mode.SUBTRACT)
    extrude(amount=PIPE_CONFIGURED_1_0_SCH_40_2_DEPTH)


with BuildPart() as body_5:
    # Sketch12 on segment 2 (carried to segment 2) → Pipe - configured 1.0 SCH 40_2 2 (new body)
    with BuildSketch(Plane(origin=(-1209.488751956, -1711.666086539, 150), x_dir=(1, 0, 0), z_dir=(0, 0, -1))):
        Circle(SKETCH12_ON_SEGMENT_2_R)
        Circle(SKETCH12_ON_SEGMENT_2_R_2, mode=Mode.SUBTRACT)
    extrude(amount=PIPE_CONFIGURED_1_0_SCH_40_2_2_DEPTH)


with BuildPart() as body_6:
    # Sketch15 → Boss-Extrude1 (new body)
    with BuildSketch(Plane(origin=(0, -1711.666086539, 0), x_dir=(1, 0, 0), z_dir=(0, 1, 0))):
        with Locations((-917.544203827, -52.370055786)):
            Rectangle(SKETCH15_W, SKETCH15_H)
    extrude(amount=BOSS_EXTRUDE1_DEPTH)


solid = Compound([part.part, body_2.part, body_3.part, body_4.part, body_5.part, body_6.part])
